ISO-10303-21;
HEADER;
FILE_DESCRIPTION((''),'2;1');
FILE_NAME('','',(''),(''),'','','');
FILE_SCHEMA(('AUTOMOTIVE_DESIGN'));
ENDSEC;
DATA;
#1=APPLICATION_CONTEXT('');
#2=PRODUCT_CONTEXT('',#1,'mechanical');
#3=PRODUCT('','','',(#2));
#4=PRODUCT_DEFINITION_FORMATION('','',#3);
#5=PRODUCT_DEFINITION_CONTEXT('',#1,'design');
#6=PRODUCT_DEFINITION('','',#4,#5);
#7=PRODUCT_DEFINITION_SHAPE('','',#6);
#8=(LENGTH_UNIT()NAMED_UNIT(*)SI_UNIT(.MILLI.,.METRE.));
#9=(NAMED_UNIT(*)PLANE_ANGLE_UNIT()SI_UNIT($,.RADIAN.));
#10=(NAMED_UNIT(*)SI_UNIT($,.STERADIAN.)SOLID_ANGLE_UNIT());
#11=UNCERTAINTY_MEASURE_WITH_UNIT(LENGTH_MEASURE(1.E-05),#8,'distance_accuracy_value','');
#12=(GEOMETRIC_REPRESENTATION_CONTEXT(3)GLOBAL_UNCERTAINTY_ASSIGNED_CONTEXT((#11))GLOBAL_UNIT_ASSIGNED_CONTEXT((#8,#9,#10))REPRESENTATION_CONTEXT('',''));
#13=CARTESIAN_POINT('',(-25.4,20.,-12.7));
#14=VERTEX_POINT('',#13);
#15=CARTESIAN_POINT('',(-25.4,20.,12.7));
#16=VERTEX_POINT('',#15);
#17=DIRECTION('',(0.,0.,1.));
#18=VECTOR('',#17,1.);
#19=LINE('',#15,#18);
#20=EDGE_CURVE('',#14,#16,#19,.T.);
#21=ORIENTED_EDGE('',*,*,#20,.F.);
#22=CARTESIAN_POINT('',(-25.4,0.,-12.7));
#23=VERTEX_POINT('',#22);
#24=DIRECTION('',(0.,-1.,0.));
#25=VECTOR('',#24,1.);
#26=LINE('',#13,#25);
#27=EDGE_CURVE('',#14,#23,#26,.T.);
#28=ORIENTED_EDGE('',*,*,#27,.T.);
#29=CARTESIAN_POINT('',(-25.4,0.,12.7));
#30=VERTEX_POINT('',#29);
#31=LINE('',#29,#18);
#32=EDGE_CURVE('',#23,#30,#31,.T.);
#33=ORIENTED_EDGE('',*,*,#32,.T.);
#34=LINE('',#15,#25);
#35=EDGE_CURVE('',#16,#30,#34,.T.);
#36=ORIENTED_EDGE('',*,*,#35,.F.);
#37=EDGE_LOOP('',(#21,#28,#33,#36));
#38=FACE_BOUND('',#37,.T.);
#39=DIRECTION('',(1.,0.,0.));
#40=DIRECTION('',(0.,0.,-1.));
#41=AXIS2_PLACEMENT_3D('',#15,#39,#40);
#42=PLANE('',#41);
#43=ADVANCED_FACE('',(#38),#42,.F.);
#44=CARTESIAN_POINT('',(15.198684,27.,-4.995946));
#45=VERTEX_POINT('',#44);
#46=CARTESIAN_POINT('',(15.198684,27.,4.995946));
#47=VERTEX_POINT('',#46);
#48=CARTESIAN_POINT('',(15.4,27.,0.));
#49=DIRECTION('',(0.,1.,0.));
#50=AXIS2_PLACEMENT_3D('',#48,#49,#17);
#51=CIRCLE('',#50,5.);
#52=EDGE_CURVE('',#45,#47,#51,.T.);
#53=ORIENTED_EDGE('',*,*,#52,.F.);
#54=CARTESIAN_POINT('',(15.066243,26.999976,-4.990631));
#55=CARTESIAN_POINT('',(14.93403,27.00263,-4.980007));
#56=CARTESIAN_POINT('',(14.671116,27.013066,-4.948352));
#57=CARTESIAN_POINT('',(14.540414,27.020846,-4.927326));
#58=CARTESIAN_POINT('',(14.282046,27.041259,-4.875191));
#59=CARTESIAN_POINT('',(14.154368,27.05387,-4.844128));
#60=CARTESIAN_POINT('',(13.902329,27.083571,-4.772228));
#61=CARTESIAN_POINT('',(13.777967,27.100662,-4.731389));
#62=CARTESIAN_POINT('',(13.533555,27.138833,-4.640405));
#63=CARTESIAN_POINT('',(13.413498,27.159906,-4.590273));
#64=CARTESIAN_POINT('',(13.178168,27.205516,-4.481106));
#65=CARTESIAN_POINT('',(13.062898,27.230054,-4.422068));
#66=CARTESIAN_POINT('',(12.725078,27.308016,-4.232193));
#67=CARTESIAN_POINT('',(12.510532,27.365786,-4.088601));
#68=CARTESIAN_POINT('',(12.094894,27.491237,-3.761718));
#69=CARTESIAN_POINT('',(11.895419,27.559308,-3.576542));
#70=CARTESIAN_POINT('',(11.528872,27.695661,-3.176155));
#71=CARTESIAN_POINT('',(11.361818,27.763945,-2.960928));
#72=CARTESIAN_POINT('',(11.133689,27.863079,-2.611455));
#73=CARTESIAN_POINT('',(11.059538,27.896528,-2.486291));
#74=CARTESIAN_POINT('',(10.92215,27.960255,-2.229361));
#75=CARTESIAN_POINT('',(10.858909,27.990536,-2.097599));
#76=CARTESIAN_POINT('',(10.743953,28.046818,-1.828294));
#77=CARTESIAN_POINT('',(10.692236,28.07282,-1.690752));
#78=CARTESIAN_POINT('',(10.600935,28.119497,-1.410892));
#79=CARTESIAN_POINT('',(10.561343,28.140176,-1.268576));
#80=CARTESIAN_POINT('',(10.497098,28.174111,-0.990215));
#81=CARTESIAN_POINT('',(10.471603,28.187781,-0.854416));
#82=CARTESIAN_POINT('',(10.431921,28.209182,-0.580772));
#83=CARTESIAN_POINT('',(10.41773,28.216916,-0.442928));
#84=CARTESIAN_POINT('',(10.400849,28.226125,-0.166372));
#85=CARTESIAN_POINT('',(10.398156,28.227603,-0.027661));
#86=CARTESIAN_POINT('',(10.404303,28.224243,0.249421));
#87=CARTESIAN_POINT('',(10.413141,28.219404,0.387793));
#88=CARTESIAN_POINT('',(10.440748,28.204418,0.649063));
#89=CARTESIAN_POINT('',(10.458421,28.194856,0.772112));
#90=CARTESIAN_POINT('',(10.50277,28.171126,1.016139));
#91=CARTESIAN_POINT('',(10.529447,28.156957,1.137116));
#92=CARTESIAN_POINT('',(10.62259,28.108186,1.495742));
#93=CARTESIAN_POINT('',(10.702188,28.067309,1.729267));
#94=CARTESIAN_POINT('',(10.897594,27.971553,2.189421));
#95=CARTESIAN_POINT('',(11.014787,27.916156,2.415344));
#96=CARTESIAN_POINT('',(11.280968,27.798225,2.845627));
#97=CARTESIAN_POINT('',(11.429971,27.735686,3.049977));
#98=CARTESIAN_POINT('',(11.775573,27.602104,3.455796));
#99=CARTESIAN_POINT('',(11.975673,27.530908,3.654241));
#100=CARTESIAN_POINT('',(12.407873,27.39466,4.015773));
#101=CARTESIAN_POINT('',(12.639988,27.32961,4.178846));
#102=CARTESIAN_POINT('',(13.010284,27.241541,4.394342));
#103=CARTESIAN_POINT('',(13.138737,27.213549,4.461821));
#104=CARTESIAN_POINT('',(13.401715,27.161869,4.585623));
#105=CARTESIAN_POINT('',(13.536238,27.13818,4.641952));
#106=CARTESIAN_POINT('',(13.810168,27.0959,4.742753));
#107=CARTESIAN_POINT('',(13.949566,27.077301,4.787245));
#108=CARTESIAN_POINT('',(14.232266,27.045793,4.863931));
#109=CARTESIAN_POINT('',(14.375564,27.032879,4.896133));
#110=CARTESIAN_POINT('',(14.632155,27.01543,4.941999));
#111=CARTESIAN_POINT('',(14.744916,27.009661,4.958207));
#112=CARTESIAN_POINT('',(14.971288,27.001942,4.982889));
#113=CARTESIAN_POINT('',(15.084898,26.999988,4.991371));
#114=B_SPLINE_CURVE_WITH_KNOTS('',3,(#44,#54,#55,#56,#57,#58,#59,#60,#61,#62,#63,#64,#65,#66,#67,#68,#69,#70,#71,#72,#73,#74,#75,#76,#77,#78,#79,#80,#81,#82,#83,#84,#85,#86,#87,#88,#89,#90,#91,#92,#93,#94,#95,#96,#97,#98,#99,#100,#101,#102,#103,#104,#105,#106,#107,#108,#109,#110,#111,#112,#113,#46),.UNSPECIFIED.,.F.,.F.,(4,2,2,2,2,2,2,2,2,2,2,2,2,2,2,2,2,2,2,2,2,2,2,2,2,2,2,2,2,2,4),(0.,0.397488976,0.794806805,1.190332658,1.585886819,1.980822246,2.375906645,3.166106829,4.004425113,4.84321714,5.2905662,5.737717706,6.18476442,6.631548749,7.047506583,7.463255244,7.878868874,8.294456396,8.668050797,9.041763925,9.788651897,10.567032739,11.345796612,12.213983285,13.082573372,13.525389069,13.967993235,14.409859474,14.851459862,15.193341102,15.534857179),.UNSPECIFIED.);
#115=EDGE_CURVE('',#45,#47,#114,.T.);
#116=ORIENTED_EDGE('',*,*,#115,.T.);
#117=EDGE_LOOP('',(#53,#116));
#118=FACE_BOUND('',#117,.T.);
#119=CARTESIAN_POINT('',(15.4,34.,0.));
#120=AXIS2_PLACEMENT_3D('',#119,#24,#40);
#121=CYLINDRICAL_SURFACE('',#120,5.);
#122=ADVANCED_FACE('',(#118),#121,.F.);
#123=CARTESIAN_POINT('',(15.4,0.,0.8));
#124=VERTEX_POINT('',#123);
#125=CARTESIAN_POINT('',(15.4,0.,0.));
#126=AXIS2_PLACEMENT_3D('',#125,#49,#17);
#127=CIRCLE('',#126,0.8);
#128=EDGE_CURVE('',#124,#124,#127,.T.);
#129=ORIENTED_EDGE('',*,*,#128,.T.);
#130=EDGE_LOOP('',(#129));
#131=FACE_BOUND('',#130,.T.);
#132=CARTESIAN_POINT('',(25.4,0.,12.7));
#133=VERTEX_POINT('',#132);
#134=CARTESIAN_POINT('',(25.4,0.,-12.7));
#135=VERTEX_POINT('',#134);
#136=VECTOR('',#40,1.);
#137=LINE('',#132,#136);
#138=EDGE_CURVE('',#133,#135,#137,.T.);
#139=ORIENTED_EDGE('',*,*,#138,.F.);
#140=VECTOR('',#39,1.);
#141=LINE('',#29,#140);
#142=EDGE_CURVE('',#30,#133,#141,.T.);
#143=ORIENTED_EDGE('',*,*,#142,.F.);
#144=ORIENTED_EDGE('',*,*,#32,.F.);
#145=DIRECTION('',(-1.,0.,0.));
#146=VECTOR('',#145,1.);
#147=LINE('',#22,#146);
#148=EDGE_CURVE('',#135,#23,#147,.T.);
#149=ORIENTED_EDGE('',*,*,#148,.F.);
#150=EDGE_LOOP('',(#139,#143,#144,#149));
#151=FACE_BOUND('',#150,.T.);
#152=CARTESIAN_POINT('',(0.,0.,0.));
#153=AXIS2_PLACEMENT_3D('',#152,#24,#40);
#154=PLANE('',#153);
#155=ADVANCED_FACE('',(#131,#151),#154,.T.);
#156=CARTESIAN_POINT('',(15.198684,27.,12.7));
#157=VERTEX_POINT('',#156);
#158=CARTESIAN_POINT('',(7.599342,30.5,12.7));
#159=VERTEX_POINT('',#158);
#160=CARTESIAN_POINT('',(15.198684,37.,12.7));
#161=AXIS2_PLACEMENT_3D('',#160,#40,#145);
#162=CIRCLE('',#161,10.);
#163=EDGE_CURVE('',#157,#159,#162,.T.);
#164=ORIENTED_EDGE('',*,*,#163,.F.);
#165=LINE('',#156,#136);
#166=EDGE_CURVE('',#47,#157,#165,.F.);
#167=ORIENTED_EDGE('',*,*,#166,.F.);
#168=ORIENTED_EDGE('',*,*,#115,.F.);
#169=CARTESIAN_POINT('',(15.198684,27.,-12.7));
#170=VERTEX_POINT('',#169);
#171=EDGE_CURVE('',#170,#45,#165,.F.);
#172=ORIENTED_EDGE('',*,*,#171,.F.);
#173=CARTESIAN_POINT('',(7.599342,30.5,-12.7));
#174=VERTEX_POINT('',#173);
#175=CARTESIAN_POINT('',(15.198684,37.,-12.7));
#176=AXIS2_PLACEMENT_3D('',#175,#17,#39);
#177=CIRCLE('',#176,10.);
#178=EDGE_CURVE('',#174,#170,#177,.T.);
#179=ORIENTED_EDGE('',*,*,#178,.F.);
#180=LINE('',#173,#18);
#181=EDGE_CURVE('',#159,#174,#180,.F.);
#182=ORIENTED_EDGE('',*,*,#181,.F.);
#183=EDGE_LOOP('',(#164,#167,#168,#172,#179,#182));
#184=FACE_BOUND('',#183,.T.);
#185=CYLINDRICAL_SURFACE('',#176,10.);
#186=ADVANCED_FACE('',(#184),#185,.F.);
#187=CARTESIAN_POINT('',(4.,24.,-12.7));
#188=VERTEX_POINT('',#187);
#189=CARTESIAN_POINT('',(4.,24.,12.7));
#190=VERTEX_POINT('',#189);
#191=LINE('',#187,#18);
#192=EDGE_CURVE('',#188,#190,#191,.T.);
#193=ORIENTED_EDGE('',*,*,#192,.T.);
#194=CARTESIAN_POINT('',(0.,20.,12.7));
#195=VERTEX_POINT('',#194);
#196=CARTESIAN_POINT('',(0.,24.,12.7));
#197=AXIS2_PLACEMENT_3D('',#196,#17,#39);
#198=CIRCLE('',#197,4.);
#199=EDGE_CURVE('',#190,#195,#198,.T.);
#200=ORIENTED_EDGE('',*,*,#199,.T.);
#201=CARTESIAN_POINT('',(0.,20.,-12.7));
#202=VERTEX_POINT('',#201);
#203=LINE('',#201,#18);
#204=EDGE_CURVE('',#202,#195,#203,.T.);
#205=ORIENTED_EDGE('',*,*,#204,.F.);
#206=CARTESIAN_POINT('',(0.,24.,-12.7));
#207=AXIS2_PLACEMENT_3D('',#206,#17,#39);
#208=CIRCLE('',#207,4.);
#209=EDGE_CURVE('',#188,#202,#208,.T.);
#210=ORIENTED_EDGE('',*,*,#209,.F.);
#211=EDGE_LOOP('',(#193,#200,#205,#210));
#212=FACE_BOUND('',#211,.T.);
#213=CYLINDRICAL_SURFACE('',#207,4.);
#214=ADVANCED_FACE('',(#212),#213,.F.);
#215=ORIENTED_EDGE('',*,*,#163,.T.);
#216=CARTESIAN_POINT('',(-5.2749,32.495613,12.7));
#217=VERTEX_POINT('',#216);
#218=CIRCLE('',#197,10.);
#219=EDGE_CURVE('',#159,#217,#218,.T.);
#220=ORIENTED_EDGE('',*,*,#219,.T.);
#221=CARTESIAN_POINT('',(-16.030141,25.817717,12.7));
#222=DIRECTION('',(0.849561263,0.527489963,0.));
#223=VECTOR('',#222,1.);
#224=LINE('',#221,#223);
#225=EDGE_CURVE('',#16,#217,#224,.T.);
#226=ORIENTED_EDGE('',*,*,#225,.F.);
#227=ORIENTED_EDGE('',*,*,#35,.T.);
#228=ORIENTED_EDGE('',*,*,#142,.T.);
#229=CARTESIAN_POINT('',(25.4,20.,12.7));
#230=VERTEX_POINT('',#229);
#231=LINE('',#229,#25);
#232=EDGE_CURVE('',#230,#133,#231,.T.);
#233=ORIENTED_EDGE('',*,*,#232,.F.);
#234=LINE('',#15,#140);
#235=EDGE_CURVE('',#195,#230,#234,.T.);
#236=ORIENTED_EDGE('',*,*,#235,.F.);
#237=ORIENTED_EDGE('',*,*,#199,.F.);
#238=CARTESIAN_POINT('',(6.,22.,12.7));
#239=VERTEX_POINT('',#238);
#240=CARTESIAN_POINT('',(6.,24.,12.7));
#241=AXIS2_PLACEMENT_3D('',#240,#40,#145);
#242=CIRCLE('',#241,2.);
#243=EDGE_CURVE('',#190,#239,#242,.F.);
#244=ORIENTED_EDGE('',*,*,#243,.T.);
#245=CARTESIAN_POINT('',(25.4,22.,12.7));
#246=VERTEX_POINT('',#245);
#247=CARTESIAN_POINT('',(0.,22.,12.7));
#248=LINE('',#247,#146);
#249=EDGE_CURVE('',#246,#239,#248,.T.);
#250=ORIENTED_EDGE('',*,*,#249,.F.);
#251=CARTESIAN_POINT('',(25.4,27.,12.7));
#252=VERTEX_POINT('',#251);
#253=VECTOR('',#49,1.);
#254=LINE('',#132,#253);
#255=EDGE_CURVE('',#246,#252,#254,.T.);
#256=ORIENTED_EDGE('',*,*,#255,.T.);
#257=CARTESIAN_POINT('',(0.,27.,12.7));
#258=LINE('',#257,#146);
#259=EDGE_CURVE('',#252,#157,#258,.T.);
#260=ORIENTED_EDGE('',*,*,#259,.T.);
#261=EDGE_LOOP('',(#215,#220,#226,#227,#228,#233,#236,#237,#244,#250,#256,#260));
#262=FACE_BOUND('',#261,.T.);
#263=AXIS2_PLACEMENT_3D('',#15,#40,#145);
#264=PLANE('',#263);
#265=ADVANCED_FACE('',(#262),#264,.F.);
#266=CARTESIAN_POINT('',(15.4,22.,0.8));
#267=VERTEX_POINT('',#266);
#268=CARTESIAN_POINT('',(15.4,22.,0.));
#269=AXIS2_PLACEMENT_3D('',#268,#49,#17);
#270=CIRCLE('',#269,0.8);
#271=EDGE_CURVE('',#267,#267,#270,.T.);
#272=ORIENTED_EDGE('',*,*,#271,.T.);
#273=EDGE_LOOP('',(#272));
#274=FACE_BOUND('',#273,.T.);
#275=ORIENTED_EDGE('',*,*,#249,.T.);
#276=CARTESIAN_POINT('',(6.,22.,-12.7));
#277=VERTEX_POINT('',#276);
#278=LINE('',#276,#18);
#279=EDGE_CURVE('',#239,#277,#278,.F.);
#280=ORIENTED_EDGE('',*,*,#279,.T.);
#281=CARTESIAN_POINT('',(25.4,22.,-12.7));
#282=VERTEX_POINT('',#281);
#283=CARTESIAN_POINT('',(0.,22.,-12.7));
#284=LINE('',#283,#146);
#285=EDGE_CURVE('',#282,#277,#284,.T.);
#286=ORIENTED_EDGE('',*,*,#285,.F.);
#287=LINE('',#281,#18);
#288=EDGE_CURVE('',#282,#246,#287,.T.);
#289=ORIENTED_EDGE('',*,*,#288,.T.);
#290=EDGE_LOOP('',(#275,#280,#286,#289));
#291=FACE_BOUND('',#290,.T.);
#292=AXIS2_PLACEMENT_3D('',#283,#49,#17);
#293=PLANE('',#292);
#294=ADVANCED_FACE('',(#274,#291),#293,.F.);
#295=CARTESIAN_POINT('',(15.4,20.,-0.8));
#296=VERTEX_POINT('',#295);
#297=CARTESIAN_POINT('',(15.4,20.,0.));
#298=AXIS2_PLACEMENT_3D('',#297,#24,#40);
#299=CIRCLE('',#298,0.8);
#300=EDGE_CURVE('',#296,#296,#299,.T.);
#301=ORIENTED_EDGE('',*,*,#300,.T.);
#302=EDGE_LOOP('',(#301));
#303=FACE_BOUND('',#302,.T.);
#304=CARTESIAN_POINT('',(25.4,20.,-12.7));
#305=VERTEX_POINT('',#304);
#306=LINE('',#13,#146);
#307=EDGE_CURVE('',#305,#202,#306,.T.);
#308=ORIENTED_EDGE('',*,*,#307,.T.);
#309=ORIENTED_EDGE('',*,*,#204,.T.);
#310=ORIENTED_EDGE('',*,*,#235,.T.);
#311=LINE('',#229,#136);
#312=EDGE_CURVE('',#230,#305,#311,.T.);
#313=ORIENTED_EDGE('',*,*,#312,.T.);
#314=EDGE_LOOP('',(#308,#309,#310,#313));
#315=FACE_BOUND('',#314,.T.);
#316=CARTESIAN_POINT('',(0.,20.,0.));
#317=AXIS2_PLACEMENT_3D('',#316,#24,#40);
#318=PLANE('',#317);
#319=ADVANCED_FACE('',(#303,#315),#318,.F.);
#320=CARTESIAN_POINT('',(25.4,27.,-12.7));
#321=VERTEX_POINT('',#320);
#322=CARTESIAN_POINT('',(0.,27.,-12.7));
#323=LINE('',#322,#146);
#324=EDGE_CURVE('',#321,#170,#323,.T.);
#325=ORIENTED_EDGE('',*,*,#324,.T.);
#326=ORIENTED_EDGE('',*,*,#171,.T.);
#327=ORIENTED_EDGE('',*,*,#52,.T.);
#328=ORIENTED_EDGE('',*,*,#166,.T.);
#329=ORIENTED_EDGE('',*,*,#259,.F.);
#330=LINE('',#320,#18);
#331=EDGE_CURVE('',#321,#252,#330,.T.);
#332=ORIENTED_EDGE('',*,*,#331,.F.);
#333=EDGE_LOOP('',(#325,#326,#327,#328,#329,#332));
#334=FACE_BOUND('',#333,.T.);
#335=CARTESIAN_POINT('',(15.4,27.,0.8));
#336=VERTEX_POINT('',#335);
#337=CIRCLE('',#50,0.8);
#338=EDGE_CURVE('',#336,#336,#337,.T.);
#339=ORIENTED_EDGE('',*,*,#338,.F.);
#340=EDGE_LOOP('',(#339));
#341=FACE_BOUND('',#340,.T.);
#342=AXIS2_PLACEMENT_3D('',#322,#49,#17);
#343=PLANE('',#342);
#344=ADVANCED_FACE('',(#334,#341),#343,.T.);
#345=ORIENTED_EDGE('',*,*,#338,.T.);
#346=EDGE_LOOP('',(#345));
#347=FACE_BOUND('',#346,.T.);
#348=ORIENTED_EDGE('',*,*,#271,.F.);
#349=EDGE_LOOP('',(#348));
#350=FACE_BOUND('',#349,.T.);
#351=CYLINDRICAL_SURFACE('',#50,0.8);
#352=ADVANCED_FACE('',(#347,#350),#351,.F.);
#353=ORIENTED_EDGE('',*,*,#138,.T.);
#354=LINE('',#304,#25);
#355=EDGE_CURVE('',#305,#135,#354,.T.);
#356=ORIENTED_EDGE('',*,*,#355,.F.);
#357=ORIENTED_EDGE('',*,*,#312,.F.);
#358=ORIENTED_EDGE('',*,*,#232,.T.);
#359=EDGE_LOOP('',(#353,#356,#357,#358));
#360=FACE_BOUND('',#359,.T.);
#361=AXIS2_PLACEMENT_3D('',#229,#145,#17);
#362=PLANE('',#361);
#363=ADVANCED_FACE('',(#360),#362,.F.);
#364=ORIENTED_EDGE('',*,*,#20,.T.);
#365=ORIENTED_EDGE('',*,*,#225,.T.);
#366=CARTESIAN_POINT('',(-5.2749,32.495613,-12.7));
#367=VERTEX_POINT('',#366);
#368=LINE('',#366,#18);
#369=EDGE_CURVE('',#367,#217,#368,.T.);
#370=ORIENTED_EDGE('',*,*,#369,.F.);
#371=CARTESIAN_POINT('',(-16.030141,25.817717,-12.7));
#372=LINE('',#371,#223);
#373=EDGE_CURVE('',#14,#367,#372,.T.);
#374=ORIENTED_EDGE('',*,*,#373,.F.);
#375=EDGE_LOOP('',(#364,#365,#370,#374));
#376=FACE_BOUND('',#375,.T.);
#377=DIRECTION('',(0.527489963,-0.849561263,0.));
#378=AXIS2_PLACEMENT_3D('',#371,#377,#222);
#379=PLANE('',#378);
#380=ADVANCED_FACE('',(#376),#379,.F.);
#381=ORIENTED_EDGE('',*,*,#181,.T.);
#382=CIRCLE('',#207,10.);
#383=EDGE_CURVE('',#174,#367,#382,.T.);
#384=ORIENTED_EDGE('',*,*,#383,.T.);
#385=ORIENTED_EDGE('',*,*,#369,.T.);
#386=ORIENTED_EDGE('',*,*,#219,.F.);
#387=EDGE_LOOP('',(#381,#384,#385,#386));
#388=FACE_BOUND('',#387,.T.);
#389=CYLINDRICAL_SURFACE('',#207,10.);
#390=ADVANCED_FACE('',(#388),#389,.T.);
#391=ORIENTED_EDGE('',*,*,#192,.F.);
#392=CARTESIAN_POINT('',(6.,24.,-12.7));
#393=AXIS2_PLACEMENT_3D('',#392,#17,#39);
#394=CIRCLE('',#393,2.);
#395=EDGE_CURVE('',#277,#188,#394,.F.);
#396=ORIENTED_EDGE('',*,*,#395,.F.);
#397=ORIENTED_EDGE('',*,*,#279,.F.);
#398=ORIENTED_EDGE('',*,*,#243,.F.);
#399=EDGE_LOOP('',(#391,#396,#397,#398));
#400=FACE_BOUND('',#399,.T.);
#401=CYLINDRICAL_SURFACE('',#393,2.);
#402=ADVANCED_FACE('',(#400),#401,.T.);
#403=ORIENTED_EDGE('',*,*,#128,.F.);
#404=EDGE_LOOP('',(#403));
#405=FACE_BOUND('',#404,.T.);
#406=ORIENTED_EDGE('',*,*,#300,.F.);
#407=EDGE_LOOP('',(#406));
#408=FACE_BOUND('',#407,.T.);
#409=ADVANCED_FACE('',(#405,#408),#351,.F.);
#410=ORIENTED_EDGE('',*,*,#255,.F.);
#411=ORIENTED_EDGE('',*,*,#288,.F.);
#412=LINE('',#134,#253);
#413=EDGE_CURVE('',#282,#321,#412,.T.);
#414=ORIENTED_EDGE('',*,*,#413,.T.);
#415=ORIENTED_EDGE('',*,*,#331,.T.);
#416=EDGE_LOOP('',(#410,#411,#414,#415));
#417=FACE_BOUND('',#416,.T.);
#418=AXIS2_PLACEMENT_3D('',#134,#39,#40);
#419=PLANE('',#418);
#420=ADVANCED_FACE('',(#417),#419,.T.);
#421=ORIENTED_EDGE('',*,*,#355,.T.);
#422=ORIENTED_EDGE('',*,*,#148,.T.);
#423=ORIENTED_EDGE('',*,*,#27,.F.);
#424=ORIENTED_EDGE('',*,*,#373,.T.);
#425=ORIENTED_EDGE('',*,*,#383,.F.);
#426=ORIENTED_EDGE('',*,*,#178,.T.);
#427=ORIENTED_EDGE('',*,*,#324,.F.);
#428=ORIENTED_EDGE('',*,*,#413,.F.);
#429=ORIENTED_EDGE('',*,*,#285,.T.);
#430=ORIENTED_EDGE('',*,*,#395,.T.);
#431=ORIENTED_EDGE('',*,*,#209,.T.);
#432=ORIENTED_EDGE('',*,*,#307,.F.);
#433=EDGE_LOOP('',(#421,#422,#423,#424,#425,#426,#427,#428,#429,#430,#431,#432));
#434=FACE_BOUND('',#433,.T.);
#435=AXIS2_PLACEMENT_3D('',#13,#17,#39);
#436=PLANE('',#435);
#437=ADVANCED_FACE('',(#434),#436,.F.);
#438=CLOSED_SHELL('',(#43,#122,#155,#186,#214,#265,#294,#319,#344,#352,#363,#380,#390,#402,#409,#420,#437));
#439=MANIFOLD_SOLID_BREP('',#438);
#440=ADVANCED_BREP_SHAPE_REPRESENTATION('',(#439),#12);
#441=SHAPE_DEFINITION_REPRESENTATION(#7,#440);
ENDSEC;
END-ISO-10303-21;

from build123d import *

# Parameters (mm, degrees)
SKETCH1_W                   = 50.8
SKETCH1_H                   = 25.4
BOSS_EXTRUDE1_DEPTH         = 20
BOSS_EXTRUDE2_DEPTH         = 25.4
FILLET1_R                   = 10
FILLET2_R                   = 2
SKETCH3_R                   = 5
CUT_EXTRUDE1_DEPTH          = 40.184818489
TAP_DRILL_FOR_M2X0_4_TAP1_D = 1.6


with BuildPart() as part:
    # Sketch1 → Boss-Extrude1 (new body)
    with BuildSketch(Plane(origin=(0, 0, 0), x_dir=(1, 0, 0), z_dir=(0, 1, 0))):
        Rectangle(SKETCH1_W, SKETCH1_H)
    extrude(amount=BOSS_EXTRUDE1_DEPTH)

    # Sketch2 → Boss-Extrude2 (add, through all)
    with BuildSketch(Plane.XY.offset(12.7)):
        with BuildLine():
            Line((3.464101615, 22), (25.4, 22))
            Line((25.4, 22), (25.4, 27))
            Line((25.4, 27), (9.539392014, 27))
            ThreePointArc((9.539392014, 27), (3.478061726, 33.375664597), (-5.274899627, 32.495612628))
            Line((-5.274899627, 32.495612628), (-25.4, 20))
            Line((-25.4, 20), (-4.8e-08, 20))
            ThreePointArc((-4.8e-08, 20), (-2.828427108, 26.828427142), (4, 24))
            ThreePointArc((4, 24), (3.863703305, 22.96472382), (3.464101615, 22))
        make_face()
    extrude(amount=-BOSS_EXTRUDE2_DEPTH)

    # Fillet1
    fillet1_edges = [part.edges().sort_by_distance(p)[0] for p in [
        (9.539392014, 27, 0),
    ]]
    fillet(fillet1_edges, radius=FILLET1_R)

    # Fillet2
    fillet2_edges = [part.edges().sort_by_distance(p)[0] for p in [
        (3.464101615, 22, 0),
    ]]
    fillet(fillet2_edges, radius=FILLET2_R - 0.0001)  # a hair under: the kernel refuses the full size

    # Sketch3 → Cut-Extrude1 (cut, through all)
    with BuildSketch(Plane(origin=(0, 27, 0), x_dir=(1, 0, 0), z_dir=(0, 1, 0))):
        with Locations((15.4, 0)):
            Circle(SKETCH3_R)
    extrude(amount=CUT_EXTRUDE1_DEPTH, mode=Mode.SUBTRACT)

    # Tap Drill for M2x0.4 Tap1 (through all)
    with Locations(Plane(origin=(0, 27, 0), x_dir=(1, 0, 0), z_dir=(0, 1, 0))):
        with Locations((15.4, 0)):
            Hole(TAP_DRILL_FOR_M2X0_4_TAP1_D / 2)


solid = part.part
